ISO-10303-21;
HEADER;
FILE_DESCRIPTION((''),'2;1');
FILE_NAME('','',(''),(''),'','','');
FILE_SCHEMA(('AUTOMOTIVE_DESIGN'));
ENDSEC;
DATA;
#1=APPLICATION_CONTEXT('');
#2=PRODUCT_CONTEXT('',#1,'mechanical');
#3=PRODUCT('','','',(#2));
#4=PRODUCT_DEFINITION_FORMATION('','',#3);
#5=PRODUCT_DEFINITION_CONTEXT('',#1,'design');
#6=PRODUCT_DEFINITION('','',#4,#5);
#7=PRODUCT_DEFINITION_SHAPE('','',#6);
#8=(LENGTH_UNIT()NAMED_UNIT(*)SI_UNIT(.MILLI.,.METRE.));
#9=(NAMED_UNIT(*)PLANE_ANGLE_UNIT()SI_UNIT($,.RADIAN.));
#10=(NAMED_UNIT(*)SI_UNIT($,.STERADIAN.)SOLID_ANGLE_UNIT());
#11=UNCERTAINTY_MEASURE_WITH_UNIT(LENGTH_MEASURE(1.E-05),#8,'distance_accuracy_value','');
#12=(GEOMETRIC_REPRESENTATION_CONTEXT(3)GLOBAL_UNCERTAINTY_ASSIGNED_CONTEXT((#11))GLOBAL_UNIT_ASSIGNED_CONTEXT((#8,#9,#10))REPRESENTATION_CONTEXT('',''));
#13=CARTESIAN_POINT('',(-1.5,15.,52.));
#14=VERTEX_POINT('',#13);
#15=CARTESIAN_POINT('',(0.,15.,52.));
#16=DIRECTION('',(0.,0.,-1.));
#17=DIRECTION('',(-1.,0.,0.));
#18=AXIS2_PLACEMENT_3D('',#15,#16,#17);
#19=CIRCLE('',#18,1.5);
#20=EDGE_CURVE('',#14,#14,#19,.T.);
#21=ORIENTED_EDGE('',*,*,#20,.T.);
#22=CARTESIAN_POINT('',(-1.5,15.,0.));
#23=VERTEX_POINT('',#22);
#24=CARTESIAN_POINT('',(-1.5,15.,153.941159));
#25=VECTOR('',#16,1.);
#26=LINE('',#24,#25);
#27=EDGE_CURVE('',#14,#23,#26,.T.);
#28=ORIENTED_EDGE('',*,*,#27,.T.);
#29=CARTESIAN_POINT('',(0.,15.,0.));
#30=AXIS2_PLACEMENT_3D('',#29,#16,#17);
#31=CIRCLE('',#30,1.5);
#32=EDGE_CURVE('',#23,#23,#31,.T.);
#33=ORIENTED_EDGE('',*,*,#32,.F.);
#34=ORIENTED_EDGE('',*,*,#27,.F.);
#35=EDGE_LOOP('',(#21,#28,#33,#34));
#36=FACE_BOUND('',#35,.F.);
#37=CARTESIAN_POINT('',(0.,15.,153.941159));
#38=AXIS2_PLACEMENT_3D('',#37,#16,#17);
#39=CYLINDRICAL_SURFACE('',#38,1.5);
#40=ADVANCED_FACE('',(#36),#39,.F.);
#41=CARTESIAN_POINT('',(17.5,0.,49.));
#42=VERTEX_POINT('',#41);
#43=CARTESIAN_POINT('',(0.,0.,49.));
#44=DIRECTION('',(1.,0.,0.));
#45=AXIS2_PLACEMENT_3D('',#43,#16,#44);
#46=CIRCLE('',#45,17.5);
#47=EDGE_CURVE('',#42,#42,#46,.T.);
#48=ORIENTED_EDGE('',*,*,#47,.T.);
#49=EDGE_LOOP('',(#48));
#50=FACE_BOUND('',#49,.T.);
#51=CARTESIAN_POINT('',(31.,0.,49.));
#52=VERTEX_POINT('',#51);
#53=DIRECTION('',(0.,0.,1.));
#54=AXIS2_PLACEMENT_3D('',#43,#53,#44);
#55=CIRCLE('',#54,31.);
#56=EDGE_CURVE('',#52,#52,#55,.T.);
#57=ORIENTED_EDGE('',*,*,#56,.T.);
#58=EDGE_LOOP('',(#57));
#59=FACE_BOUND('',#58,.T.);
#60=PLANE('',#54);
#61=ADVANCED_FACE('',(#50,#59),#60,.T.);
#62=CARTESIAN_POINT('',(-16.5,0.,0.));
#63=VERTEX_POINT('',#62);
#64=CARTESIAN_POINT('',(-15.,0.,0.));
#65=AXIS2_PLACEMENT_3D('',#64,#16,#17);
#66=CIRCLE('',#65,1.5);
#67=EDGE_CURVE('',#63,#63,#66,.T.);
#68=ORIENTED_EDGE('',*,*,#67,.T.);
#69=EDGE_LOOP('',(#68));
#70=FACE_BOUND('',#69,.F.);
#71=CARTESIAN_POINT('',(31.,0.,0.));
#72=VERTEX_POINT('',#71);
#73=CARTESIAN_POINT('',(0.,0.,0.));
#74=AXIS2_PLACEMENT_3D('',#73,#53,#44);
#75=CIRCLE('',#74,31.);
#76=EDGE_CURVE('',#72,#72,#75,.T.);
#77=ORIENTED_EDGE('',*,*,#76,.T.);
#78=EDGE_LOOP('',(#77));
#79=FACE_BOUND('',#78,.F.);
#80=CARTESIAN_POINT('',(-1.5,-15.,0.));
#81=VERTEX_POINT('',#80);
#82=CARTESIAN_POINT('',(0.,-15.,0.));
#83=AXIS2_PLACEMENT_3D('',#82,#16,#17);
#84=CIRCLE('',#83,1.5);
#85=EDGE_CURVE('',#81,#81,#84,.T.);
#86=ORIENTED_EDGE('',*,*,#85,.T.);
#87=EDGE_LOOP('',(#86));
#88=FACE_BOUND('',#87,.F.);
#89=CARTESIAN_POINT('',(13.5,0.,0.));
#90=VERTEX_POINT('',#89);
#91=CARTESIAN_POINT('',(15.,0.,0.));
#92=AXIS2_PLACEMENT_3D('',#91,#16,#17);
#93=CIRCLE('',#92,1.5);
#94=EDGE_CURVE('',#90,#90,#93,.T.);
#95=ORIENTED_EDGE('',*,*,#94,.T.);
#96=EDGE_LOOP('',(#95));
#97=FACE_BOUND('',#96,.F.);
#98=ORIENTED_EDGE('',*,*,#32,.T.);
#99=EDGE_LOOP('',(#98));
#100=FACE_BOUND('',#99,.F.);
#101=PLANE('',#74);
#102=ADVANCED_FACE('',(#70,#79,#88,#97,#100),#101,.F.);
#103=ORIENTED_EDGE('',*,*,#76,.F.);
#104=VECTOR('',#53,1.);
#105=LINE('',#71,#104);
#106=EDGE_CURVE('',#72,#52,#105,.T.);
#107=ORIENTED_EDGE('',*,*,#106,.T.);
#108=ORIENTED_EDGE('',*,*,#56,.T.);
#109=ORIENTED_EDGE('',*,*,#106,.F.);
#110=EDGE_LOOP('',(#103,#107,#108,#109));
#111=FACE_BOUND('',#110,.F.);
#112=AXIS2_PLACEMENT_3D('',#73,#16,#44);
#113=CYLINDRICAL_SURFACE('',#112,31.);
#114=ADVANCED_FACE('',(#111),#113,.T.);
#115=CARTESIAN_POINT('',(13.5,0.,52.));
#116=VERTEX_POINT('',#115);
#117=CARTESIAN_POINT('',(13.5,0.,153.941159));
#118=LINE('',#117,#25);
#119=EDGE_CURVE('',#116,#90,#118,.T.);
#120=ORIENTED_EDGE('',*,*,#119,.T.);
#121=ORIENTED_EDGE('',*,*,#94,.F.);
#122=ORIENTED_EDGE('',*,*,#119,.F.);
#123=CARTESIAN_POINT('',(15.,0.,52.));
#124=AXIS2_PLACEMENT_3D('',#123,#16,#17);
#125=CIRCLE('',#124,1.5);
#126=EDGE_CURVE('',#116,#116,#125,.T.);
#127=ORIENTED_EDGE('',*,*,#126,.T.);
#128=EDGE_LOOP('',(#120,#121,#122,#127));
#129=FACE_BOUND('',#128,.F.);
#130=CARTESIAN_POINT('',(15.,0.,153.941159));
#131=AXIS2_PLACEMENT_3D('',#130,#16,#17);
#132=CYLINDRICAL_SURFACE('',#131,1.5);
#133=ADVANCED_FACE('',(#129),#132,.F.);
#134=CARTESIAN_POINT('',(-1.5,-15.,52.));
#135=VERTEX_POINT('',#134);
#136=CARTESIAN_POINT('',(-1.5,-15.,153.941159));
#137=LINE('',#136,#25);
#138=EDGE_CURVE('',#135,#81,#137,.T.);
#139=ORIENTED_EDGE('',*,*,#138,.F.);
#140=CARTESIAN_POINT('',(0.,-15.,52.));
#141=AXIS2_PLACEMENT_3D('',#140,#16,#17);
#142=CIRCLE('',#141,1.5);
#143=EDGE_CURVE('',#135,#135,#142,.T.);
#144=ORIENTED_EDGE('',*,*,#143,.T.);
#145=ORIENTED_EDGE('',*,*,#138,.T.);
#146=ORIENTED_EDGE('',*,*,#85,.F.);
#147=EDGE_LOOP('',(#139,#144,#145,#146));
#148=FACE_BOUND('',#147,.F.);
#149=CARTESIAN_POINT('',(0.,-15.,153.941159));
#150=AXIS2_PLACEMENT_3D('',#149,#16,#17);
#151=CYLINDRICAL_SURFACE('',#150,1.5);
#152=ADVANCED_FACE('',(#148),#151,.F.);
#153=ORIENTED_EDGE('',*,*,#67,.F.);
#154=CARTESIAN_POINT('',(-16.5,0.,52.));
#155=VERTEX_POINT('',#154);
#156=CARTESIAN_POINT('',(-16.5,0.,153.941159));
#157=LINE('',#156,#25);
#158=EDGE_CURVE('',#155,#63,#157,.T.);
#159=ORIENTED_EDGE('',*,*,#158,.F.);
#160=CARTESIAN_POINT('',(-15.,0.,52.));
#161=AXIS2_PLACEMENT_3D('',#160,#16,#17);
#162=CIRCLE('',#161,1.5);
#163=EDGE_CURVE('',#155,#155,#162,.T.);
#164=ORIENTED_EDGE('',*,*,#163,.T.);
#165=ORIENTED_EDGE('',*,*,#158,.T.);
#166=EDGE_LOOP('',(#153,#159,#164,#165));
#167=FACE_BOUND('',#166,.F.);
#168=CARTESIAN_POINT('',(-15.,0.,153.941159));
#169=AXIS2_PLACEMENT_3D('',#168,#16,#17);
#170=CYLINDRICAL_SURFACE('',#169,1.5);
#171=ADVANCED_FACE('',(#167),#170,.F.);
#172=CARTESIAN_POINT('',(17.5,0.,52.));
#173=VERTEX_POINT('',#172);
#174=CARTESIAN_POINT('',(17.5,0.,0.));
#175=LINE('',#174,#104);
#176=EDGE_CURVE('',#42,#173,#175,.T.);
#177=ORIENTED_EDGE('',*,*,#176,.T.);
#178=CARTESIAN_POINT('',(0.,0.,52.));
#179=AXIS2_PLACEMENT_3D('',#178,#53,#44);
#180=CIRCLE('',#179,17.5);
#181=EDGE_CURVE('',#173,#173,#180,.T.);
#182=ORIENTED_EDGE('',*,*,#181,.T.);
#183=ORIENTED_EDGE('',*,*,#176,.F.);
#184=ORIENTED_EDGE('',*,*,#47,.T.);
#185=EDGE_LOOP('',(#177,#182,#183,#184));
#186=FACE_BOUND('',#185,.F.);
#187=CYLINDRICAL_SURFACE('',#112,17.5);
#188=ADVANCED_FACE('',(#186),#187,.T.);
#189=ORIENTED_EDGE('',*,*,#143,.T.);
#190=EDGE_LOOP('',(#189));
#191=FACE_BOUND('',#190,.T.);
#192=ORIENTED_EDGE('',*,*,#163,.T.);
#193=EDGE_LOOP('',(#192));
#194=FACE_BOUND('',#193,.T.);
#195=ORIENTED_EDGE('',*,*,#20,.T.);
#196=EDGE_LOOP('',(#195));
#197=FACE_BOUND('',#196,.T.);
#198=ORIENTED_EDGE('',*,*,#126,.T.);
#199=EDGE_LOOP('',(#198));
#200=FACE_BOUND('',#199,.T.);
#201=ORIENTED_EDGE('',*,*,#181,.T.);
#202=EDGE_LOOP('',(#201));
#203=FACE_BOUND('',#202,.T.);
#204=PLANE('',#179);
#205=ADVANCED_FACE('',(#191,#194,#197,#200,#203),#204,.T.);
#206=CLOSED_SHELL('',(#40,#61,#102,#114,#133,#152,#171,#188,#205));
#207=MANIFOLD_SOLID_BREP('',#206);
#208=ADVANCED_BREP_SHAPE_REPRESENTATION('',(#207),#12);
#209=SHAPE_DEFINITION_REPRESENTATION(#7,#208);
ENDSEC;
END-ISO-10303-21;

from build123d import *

# Parameters (mm, degrees)
F0_R     = 31
F1_DEPTH = 49
F2_R     = 17.5
F4_DEPTH = 52
F6_D     = 3


# Not quite as in the source:
# - the program builds the solid bodies; features that only make, move or delete a surface that nothing else refers to are left out


with BuildPart() as f1:
    # F0 (on Top) → F1 (new body)
    with BuildSketch(Plane.XY):
        Circle(F0_R)
    extrude(amount=F1_DEPTH)

    # F2 (on Top) → F4 (join)
    with BuildSketch(Plane.XY):
        Circle(F2_R)
    extrude(amount=F4_DEPTH)

    # F6 (through all)
    with Locations(Plane.XY.offset(52)):
        with Locations((0, 15), (-15, 0), (0, -15), (15, 0)):
            Hole(F6_D / 2)


solid = f1.part
